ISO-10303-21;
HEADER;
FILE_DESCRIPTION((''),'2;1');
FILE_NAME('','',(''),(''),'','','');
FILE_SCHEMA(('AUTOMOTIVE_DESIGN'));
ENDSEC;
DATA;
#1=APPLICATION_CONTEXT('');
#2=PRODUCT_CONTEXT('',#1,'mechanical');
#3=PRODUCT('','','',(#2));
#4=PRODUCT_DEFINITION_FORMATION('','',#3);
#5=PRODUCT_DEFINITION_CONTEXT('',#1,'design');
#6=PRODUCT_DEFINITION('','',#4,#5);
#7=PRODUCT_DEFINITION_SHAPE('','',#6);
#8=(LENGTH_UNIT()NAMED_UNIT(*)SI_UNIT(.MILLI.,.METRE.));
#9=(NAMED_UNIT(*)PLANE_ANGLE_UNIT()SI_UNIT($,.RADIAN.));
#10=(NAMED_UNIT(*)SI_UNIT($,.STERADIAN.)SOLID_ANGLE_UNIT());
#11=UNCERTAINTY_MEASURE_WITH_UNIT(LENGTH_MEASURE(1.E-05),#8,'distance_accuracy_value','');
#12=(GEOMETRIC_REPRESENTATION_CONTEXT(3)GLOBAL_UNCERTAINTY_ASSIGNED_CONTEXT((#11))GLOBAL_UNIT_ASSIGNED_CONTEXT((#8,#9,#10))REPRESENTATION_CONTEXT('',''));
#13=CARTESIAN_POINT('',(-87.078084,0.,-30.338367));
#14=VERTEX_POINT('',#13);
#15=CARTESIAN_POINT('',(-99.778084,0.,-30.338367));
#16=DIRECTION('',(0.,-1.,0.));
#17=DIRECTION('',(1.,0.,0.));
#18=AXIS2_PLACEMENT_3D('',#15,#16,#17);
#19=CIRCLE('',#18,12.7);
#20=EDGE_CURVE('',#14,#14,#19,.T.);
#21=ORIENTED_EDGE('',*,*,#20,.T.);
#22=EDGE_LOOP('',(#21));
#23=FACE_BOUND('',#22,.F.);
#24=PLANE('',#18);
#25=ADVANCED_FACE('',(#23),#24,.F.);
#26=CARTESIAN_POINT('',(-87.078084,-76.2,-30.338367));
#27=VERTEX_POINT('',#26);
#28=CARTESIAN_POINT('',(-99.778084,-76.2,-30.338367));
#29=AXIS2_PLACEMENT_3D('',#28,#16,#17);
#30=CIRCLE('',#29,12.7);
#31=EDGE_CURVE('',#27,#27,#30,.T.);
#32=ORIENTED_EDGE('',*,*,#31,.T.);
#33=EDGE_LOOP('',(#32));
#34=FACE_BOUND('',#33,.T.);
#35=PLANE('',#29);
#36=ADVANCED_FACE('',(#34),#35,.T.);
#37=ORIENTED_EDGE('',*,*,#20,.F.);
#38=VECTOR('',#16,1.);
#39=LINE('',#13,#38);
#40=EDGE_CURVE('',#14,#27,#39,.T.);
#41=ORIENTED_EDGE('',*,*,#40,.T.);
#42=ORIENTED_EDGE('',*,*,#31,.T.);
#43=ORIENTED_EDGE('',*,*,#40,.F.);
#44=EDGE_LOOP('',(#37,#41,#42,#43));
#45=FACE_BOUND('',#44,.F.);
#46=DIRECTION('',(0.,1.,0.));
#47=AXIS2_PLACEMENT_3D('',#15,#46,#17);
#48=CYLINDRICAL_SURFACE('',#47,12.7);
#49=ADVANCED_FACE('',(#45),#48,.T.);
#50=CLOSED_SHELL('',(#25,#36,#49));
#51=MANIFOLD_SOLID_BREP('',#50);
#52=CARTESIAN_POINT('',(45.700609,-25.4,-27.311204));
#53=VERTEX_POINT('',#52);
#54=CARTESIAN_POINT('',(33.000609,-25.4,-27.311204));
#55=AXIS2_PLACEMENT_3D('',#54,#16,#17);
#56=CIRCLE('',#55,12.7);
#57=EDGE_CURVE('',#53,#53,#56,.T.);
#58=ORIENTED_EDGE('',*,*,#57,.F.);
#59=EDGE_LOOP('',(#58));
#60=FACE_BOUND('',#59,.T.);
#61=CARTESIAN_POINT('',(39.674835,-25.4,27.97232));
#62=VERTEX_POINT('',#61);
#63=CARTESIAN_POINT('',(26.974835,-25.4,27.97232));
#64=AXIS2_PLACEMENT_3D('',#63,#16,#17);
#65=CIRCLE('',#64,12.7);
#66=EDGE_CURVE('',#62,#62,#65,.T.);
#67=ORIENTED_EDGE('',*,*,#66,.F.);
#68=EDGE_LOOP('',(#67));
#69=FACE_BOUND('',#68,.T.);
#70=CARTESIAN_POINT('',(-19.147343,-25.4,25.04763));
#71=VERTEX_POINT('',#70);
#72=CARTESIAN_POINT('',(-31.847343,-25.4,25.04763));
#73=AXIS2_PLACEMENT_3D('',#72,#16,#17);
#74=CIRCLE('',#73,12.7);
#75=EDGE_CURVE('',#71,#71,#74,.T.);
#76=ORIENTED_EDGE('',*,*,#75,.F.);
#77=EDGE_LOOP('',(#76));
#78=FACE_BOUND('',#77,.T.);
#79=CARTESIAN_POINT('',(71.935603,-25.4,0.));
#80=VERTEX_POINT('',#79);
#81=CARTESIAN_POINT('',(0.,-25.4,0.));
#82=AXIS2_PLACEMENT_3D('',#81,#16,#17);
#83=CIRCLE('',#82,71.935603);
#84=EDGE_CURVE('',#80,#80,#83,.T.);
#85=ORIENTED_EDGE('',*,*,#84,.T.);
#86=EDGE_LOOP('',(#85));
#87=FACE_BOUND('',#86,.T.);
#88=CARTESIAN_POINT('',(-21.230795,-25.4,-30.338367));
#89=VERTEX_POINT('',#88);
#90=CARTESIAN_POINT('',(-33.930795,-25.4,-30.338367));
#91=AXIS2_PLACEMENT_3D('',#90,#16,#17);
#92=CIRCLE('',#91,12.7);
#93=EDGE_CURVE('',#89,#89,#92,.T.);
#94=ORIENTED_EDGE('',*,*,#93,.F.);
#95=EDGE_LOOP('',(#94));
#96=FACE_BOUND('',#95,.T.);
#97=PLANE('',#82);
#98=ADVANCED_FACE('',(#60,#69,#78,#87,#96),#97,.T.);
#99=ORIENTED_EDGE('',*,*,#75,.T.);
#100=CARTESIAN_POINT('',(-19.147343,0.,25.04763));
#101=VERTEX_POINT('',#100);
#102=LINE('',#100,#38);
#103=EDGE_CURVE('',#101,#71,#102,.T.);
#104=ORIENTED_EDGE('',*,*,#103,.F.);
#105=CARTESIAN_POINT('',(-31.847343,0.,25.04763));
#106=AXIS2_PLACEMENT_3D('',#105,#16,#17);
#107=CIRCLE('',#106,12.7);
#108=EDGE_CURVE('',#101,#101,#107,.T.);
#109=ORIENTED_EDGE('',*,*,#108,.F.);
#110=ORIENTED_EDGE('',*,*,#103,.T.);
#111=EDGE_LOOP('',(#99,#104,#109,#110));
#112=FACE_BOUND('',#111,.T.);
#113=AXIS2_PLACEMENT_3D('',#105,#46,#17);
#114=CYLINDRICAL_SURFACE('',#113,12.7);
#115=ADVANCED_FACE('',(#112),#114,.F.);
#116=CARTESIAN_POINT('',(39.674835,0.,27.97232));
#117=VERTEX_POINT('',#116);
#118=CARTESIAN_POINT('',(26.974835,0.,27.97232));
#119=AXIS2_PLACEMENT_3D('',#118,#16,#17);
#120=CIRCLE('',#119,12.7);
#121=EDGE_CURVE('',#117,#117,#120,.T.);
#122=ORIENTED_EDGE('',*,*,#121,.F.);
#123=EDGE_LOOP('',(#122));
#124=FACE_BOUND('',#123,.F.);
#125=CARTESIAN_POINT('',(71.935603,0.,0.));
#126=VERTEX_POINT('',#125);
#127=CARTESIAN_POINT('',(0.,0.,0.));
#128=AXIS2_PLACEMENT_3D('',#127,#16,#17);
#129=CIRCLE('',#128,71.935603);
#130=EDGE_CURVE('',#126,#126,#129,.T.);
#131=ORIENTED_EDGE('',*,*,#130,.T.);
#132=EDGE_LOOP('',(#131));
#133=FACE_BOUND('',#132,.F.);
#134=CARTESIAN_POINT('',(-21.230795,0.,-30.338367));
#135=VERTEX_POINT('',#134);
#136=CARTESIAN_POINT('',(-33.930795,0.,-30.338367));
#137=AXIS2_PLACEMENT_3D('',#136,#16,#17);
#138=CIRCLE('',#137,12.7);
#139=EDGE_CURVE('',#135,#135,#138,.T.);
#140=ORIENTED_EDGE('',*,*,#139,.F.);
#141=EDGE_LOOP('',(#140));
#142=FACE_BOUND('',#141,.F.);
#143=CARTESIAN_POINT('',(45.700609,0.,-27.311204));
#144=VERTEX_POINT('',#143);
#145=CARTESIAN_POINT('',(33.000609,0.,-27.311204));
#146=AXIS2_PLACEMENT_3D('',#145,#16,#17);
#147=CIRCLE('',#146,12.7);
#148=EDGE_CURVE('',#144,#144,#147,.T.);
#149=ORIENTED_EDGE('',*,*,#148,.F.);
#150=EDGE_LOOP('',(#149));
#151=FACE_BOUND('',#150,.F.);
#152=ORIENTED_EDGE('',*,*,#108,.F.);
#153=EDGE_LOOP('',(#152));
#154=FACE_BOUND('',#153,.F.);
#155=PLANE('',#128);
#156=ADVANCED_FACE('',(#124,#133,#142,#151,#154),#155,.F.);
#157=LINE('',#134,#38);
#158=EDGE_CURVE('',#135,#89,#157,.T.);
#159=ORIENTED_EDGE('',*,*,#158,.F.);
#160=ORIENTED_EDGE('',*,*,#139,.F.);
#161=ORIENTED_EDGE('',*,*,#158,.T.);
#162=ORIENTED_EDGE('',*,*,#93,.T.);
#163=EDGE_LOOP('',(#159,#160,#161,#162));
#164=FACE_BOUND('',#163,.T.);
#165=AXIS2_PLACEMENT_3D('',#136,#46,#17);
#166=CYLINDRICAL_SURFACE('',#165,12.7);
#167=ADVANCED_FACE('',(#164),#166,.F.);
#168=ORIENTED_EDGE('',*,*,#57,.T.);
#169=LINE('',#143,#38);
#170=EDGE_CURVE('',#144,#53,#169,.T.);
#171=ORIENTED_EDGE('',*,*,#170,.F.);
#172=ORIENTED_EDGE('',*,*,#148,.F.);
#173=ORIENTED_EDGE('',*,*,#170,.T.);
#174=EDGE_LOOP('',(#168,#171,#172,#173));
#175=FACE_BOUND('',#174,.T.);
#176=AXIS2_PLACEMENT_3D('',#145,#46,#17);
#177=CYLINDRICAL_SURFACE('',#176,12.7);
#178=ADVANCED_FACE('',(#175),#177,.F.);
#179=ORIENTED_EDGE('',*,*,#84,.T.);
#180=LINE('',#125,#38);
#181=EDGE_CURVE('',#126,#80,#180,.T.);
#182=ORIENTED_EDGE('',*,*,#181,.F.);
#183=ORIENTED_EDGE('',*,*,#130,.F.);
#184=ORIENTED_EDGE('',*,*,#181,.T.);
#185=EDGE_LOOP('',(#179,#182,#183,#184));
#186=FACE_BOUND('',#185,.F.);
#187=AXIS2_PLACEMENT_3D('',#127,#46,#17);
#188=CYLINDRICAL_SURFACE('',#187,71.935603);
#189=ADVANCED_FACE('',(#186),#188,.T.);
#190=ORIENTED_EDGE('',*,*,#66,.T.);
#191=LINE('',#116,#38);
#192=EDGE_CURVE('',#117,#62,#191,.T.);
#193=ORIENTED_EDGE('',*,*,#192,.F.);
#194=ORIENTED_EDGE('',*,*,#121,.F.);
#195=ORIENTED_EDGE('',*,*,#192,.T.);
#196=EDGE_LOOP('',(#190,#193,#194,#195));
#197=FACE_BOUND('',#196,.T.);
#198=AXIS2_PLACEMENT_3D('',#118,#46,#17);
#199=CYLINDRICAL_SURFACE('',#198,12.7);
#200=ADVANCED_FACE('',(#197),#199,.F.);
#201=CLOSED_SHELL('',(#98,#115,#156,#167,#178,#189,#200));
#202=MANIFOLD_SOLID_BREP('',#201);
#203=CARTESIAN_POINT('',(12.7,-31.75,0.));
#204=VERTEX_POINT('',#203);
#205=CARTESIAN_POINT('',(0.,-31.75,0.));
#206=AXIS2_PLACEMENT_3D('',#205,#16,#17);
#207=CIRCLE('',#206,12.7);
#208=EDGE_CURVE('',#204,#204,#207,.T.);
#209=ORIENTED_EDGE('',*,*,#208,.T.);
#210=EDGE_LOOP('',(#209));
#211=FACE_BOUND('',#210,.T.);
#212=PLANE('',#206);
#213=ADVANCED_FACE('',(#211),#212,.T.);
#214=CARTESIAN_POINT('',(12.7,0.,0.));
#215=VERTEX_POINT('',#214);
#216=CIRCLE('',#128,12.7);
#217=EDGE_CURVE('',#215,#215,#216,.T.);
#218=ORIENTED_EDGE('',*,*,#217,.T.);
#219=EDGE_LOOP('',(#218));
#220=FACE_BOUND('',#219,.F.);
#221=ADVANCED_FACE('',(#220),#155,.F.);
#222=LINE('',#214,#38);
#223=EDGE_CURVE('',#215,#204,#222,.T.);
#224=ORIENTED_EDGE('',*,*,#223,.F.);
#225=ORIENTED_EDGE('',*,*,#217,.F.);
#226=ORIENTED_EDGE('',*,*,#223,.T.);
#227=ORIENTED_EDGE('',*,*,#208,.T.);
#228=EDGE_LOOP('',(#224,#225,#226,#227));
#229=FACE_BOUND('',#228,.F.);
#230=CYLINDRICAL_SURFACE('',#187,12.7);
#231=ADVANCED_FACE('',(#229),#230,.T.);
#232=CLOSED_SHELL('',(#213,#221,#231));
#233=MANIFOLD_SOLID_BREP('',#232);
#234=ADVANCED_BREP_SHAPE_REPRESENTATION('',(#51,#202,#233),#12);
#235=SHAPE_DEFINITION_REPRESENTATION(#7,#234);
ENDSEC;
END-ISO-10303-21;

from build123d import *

# Parameters (mm, degrees)
F0_R     = 71.9356029279
F0_R_2   = 12.7
F1_DEPTH = 25.4
F3_DEPTH = 31.75
F4_DEPTH = 76.2


# Not quite as in the source:
# - the program builds the solid bodies; features that only make, move or delete a surface that nothing else refers to are left out


with BuildPart() as f1:
    # F0 (on Front) → F1 (new body)
    with BuildSketch(Plane.XZ):
        Circle(F0_R)
        with Locations((-33.9307952672, -30.3383674473)):
            Circle(F0_R_2, mode=Mode.SUBTRACT)
        with Locations((-31.8473428488, 25.0476300716)):
            Circle(F0_R_2, mode=Mode.SUBTRACT)
        Circle(F0_R_2, mode=Mode.SUBTRACT)
        with Locations((33.0006089061, -27.3112040013)):
            Circle(F0_R_2, mode=Mode.SUBTRACT)
        with Locations((26.9748345017, 27.9723200947)):
            Circle(F0_R_2, mode=Mode.SUBTRACT)
        Circle(F0_R_2)
    extrude(amount=F1_DEPTH)


with BuildPart() as f3:
    # F0 (on Front) → F3 (new body)
    with BuildSketch(Plane.XZ):
        Circle(F0_R_2)
    extrude(amount=F3_DEPTH)


with BuildPart() as f4:
    # F0 (on Front) → F4 (new body)
    with BuildSketch(Plane.XZ):
        with Locations((-99.7780840844, -30.3383674473)):
            Circle(F0_R_2)
    extrude(amount=F4_DEPTH)


solid = Compound([f1.part, f3.part, f4.part])
